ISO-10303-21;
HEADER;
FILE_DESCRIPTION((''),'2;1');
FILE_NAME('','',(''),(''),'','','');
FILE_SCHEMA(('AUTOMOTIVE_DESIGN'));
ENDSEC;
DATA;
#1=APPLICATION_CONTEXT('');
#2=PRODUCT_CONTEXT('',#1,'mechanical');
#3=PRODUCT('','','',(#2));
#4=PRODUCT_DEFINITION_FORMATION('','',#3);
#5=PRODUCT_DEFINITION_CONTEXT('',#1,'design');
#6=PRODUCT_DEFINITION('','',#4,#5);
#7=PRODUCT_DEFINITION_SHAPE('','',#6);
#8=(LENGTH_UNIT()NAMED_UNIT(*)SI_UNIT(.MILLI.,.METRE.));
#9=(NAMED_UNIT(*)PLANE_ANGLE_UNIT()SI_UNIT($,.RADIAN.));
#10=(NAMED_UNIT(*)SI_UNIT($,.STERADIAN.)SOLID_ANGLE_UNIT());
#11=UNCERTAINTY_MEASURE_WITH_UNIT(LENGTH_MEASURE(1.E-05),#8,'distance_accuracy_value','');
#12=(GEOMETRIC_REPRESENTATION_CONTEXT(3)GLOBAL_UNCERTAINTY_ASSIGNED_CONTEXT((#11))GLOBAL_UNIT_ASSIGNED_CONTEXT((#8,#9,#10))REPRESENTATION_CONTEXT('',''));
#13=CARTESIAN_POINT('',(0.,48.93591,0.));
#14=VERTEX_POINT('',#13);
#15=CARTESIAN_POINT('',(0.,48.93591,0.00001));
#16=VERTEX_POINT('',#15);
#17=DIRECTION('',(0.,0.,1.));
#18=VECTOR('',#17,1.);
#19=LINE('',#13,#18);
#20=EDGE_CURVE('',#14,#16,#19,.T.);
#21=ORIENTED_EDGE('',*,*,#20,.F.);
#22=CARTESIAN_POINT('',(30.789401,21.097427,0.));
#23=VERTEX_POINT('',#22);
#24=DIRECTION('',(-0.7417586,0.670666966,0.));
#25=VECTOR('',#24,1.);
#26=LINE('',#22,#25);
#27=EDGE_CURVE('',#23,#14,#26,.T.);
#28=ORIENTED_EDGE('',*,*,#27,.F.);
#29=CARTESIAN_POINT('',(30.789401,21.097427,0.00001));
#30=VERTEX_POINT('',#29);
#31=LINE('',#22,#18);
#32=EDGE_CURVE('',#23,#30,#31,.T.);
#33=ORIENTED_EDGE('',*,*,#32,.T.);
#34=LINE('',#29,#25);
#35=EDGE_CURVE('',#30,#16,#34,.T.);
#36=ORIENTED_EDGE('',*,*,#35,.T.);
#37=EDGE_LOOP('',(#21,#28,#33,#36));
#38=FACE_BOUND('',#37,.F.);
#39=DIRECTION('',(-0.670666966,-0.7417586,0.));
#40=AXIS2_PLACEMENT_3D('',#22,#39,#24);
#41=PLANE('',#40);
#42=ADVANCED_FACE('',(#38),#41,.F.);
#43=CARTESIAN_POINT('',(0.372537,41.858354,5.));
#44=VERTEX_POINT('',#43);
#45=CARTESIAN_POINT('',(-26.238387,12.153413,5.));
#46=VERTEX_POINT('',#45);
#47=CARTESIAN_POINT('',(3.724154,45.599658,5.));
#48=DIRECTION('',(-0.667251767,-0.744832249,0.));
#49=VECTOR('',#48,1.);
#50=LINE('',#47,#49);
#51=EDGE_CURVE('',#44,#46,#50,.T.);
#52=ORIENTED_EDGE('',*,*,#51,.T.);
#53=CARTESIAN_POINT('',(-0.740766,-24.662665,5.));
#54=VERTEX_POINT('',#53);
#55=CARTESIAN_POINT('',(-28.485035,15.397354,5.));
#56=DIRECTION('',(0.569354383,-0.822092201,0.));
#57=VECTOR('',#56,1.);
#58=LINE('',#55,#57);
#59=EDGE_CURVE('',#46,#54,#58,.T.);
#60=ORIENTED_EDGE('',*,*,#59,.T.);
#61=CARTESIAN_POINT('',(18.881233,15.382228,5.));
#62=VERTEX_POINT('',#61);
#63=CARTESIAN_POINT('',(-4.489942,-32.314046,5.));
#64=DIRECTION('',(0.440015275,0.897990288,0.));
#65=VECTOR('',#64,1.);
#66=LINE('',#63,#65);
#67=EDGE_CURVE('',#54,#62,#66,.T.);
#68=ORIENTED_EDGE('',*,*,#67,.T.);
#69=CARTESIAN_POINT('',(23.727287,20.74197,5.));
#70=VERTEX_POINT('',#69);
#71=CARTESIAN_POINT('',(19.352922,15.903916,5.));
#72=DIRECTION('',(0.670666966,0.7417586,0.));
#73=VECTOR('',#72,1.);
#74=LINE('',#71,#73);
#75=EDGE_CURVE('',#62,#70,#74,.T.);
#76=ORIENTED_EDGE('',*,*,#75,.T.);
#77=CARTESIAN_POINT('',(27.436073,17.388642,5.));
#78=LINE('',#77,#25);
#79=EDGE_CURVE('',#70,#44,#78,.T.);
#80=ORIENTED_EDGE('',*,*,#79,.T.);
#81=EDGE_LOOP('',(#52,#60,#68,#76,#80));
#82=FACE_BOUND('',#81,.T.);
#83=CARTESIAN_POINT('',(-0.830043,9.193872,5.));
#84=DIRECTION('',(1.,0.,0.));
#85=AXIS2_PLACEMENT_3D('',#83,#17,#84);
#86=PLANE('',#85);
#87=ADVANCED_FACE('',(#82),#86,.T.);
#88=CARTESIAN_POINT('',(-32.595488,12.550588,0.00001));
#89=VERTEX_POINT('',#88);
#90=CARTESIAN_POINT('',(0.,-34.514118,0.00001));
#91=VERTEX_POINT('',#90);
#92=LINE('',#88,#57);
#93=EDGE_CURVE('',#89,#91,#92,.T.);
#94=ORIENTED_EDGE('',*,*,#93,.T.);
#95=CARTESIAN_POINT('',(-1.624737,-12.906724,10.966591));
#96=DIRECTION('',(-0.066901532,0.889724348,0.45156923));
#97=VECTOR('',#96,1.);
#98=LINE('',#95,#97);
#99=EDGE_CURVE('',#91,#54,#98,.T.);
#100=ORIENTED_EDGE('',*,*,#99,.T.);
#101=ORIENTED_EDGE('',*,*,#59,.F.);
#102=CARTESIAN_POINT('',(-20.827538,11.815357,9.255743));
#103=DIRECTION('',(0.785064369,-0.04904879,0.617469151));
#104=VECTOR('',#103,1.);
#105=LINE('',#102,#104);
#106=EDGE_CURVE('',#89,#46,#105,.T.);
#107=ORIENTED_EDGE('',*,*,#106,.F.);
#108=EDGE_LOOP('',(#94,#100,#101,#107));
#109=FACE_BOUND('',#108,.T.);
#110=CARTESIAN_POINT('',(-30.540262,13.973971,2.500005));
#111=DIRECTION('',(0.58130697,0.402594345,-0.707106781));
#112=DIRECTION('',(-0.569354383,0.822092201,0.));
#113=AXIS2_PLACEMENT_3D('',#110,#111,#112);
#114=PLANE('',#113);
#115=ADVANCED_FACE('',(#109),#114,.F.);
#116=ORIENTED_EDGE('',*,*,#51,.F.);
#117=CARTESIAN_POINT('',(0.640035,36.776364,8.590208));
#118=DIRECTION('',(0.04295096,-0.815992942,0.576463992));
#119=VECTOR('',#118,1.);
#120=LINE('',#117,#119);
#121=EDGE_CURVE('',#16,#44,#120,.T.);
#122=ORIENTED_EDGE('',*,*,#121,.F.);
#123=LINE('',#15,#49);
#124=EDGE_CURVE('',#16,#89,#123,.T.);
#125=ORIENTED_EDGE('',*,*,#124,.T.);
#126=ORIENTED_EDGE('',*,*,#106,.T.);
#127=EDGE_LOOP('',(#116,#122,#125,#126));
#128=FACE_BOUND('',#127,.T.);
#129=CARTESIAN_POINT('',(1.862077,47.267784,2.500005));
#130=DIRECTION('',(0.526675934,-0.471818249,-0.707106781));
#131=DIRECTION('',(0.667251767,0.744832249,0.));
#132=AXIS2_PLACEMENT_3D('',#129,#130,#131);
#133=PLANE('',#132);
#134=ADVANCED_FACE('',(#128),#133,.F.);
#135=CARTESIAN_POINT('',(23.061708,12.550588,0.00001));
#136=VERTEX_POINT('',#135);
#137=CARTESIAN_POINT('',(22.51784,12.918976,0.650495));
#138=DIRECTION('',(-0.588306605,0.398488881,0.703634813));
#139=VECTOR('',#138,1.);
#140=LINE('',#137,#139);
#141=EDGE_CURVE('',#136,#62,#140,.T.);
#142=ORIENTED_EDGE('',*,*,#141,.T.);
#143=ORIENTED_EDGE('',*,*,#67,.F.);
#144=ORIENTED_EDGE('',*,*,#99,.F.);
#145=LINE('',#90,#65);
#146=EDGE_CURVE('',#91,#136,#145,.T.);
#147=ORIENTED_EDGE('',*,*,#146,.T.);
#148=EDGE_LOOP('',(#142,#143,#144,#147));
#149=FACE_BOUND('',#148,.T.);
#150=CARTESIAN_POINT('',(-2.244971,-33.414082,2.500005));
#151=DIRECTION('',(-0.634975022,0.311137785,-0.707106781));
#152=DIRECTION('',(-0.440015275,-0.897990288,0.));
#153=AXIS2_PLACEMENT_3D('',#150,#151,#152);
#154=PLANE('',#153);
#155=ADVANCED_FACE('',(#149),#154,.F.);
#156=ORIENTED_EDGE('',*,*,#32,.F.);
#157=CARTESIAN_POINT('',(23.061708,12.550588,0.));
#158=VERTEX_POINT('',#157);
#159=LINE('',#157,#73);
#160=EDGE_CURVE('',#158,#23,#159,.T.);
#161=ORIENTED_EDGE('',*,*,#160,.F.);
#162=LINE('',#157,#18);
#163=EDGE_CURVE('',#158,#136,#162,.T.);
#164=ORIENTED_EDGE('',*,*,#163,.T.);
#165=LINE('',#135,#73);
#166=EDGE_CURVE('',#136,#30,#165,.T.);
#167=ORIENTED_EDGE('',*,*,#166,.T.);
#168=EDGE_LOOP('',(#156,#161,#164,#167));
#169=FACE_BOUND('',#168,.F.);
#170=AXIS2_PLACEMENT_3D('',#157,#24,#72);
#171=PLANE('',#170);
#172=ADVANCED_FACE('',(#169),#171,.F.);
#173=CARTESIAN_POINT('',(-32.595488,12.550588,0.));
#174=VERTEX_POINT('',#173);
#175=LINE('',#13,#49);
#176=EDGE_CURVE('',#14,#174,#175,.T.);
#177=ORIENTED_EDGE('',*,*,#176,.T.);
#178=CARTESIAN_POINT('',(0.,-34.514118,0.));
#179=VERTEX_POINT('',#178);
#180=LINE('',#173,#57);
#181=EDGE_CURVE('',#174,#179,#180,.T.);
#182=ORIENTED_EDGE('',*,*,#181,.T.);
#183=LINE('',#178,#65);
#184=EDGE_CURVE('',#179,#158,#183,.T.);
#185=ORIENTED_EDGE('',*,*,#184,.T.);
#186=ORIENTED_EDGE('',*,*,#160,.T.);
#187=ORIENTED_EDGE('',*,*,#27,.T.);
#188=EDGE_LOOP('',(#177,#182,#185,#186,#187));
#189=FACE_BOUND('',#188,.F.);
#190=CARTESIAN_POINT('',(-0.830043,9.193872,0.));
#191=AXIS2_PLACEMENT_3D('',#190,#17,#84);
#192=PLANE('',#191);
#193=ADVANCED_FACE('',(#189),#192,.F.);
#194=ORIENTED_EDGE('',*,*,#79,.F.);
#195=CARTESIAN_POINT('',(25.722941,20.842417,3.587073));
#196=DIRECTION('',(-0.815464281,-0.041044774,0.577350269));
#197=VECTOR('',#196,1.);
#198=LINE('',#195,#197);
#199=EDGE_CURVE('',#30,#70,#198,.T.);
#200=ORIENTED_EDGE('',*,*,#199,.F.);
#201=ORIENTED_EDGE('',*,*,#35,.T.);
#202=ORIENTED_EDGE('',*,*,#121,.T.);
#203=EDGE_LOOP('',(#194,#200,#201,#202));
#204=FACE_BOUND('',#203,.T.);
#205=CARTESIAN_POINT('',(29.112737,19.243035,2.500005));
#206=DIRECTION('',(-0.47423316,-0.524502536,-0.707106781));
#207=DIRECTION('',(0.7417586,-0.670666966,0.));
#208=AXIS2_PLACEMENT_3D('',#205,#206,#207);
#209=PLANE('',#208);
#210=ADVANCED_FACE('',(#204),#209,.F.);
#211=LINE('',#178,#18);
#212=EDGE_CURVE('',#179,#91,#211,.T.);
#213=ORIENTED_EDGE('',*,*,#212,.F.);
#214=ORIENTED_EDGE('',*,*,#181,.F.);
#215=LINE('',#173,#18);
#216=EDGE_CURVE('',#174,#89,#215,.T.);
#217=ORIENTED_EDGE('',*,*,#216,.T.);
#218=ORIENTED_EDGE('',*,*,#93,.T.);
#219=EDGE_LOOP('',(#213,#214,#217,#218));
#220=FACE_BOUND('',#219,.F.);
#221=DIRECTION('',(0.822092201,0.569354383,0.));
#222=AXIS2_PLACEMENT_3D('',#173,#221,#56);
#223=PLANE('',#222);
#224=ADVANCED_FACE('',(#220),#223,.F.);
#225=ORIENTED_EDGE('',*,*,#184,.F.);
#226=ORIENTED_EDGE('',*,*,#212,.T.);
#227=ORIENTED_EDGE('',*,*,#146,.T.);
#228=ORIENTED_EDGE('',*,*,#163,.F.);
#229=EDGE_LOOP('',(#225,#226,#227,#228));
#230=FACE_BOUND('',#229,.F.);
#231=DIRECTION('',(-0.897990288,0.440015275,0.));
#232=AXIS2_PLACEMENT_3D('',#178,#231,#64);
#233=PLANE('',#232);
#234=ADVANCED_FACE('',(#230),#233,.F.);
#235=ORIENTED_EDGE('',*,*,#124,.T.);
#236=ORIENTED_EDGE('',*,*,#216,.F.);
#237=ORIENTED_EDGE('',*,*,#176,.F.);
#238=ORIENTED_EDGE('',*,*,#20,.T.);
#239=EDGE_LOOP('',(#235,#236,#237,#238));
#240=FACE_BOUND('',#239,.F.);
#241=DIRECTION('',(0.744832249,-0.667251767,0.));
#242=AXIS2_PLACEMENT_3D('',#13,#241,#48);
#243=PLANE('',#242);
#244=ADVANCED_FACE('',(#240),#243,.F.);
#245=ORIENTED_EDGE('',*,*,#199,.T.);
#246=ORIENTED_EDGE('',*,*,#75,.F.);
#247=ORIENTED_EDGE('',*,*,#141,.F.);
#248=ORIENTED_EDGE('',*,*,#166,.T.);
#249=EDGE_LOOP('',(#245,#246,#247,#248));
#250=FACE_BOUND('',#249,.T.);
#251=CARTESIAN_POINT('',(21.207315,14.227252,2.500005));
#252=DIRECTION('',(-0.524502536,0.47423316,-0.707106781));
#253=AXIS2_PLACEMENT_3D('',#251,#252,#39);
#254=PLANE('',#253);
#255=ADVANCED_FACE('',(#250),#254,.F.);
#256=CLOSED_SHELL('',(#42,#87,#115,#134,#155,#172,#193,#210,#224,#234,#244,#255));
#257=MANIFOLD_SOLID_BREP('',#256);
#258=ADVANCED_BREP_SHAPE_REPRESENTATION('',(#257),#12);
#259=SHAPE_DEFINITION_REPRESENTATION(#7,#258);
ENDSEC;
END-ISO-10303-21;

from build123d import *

# Parameters (mm, degrees)
F1_DEPTH = 5
F2_SIZE  = 4.99999


# Not quite as in the source:
# - a fillet or chamfer is up to 0.001 mm smaller than in the source, because OpenCascade refuses the exact size


with BuildPart() as f1:
    # F0 (on Top) → F1 (new body)
    with BuildSketch(Plane.XY):
        Polygon((30.7894008997, 21.0974273146), (0, 48.9359102053), (-32.5954880442, 12.5505877659), (0, -34.514117986), (23.0617076159, 12.5505877659), align=None)
    extrude(amount=F1_DEPTH)

    # F2 (size 5 in the source; OpenCascade refuses exactly that, so slightly less here)
    f2_edges = [f1.edges().sort_by_distance(p)[0] for p in [
        (-16.297744, 30.743249, 5),
        (-16.297744, -10.981765, 5),
        (11.530854, -10.981765, 5),
        (26.925554, 16.824008, 5),
        (15.3947, 35.016669, 5),
    ]]
    chamfer(f2_edges, length=F2_SIZE)


solid = f1.part
